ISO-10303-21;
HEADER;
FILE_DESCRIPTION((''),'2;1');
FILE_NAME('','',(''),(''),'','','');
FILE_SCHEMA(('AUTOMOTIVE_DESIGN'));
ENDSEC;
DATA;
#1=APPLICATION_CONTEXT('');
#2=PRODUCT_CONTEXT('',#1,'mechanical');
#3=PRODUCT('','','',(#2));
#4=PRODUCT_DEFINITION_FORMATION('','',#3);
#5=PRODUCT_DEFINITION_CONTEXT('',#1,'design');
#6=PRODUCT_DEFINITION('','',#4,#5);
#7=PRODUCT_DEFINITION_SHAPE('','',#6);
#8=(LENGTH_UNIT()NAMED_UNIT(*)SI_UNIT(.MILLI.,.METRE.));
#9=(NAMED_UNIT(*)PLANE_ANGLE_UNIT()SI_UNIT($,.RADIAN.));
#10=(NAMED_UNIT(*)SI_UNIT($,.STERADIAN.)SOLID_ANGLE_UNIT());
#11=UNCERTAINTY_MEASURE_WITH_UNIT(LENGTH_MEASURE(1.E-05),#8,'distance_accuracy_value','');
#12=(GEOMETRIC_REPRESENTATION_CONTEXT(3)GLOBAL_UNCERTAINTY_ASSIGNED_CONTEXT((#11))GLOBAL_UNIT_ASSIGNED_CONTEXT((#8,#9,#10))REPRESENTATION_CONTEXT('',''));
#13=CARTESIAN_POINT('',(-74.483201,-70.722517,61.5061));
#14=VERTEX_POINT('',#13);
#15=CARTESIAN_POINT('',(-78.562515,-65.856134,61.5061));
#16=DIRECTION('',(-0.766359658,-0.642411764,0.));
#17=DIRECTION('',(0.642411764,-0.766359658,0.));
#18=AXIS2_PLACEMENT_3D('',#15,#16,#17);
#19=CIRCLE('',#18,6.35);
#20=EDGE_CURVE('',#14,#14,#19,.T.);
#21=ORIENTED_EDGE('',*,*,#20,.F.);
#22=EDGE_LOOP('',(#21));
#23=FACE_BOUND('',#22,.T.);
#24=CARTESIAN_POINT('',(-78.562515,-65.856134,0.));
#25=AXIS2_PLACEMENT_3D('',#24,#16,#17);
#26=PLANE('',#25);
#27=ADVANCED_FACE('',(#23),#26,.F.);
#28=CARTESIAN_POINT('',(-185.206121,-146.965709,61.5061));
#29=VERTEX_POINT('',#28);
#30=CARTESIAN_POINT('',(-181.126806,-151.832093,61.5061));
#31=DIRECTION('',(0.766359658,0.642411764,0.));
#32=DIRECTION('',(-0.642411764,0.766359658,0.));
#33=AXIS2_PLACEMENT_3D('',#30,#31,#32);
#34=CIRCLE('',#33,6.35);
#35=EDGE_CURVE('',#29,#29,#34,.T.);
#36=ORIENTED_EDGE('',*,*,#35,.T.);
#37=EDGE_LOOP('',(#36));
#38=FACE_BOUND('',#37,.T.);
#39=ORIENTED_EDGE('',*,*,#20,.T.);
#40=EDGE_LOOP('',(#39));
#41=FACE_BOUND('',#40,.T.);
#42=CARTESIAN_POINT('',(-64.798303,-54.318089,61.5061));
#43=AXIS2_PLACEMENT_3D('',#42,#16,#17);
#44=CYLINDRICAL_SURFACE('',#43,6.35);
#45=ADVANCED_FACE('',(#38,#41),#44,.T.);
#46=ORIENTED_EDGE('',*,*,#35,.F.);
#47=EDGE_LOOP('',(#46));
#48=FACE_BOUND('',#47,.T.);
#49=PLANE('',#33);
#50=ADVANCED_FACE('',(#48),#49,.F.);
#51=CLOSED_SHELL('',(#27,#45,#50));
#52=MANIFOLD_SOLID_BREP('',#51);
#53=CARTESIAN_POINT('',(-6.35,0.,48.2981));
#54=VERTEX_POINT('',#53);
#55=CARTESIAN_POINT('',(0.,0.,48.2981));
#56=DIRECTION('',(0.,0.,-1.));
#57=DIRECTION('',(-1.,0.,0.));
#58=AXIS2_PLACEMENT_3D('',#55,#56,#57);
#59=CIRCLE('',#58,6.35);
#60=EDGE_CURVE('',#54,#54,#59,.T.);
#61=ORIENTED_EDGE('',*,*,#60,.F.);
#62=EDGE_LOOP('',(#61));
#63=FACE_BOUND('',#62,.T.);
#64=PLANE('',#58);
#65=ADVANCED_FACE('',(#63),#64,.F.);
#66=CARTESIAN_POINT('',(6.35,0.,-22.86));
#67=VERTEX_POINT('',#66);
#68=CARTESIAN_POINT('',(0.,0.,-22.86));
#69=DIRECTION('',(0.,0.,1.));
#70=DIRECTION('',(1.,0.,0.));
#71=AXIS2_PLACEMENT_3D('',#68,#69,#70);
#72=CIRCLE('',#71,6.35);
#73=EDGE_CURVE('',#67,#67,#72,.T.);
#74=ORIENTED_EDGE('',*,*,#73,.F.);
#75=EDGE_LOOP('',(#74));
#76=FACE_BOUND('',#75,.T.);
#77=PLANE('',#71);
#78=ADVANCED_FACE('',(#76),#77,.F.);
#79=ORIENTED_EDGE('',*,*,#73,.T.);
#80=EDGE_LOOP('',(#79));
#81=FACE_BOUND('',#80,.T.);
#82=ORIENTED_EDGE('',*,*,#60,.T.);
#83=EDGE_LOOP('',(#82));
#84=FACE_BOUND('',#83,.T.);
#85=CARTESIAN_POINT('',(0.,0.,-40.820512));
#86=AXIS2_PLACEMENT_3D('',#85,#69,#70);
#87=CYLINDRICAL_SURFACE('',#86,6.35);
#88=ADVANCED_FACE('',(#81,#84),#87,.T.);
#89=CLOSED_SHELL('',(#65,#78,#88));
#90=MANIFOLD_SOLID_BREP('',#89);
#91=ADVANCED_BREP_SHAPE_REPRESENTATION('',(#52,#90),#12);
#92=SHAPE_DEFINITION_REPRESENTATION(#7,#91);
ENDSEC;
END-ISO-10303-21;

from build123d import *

# Parameters (mm, degrees)
BOSS_EXTRUDE1_OUTLINE_R = 6.35
BOSS_EXTRUDE1_DEPTH     = 133.833102677
SKETCH3_R               = 6.35
BOSS_EXTRUDE2_DEPTH     = 71.1581


# Read off the part's stored shape, not the designer's step: Boss-Extrude1
with BuildPart() as part:
    # Boss-Extrude1 outline → Boss-Extrude1 (new body)
    with BuildSketch(Plane(origin=(-181.126806004, -151.8320933, 0), x_dir=(0, 0, -1), z_dir=(0.7663596576395599, 0.6424117644802098, 0))):
        with Locations((-61.5061, 0)):
            Circle(BOSS_EXTRUDE1_OUTLINE_R)
    extrude(amount=BOSS_EXTRUDE1_DEPTH)


with BuildPart() as body_2:
    # Sketch3 → Boss-Extrude2 (new body)
    with BuildSketch(Plane(origin=(0, 0, 48.2981), x_dir=(-1, 0, 0), z_dir=(0, 0, -1))):
        with Locations(Location((0, 0, 0), (0, 0, 180))):
            Circle(SKETCH3_R)
    extrude(amount=BOSS_EXTRUDE2_DEPTH)


solid = Compound([part.part, body_2.part])
